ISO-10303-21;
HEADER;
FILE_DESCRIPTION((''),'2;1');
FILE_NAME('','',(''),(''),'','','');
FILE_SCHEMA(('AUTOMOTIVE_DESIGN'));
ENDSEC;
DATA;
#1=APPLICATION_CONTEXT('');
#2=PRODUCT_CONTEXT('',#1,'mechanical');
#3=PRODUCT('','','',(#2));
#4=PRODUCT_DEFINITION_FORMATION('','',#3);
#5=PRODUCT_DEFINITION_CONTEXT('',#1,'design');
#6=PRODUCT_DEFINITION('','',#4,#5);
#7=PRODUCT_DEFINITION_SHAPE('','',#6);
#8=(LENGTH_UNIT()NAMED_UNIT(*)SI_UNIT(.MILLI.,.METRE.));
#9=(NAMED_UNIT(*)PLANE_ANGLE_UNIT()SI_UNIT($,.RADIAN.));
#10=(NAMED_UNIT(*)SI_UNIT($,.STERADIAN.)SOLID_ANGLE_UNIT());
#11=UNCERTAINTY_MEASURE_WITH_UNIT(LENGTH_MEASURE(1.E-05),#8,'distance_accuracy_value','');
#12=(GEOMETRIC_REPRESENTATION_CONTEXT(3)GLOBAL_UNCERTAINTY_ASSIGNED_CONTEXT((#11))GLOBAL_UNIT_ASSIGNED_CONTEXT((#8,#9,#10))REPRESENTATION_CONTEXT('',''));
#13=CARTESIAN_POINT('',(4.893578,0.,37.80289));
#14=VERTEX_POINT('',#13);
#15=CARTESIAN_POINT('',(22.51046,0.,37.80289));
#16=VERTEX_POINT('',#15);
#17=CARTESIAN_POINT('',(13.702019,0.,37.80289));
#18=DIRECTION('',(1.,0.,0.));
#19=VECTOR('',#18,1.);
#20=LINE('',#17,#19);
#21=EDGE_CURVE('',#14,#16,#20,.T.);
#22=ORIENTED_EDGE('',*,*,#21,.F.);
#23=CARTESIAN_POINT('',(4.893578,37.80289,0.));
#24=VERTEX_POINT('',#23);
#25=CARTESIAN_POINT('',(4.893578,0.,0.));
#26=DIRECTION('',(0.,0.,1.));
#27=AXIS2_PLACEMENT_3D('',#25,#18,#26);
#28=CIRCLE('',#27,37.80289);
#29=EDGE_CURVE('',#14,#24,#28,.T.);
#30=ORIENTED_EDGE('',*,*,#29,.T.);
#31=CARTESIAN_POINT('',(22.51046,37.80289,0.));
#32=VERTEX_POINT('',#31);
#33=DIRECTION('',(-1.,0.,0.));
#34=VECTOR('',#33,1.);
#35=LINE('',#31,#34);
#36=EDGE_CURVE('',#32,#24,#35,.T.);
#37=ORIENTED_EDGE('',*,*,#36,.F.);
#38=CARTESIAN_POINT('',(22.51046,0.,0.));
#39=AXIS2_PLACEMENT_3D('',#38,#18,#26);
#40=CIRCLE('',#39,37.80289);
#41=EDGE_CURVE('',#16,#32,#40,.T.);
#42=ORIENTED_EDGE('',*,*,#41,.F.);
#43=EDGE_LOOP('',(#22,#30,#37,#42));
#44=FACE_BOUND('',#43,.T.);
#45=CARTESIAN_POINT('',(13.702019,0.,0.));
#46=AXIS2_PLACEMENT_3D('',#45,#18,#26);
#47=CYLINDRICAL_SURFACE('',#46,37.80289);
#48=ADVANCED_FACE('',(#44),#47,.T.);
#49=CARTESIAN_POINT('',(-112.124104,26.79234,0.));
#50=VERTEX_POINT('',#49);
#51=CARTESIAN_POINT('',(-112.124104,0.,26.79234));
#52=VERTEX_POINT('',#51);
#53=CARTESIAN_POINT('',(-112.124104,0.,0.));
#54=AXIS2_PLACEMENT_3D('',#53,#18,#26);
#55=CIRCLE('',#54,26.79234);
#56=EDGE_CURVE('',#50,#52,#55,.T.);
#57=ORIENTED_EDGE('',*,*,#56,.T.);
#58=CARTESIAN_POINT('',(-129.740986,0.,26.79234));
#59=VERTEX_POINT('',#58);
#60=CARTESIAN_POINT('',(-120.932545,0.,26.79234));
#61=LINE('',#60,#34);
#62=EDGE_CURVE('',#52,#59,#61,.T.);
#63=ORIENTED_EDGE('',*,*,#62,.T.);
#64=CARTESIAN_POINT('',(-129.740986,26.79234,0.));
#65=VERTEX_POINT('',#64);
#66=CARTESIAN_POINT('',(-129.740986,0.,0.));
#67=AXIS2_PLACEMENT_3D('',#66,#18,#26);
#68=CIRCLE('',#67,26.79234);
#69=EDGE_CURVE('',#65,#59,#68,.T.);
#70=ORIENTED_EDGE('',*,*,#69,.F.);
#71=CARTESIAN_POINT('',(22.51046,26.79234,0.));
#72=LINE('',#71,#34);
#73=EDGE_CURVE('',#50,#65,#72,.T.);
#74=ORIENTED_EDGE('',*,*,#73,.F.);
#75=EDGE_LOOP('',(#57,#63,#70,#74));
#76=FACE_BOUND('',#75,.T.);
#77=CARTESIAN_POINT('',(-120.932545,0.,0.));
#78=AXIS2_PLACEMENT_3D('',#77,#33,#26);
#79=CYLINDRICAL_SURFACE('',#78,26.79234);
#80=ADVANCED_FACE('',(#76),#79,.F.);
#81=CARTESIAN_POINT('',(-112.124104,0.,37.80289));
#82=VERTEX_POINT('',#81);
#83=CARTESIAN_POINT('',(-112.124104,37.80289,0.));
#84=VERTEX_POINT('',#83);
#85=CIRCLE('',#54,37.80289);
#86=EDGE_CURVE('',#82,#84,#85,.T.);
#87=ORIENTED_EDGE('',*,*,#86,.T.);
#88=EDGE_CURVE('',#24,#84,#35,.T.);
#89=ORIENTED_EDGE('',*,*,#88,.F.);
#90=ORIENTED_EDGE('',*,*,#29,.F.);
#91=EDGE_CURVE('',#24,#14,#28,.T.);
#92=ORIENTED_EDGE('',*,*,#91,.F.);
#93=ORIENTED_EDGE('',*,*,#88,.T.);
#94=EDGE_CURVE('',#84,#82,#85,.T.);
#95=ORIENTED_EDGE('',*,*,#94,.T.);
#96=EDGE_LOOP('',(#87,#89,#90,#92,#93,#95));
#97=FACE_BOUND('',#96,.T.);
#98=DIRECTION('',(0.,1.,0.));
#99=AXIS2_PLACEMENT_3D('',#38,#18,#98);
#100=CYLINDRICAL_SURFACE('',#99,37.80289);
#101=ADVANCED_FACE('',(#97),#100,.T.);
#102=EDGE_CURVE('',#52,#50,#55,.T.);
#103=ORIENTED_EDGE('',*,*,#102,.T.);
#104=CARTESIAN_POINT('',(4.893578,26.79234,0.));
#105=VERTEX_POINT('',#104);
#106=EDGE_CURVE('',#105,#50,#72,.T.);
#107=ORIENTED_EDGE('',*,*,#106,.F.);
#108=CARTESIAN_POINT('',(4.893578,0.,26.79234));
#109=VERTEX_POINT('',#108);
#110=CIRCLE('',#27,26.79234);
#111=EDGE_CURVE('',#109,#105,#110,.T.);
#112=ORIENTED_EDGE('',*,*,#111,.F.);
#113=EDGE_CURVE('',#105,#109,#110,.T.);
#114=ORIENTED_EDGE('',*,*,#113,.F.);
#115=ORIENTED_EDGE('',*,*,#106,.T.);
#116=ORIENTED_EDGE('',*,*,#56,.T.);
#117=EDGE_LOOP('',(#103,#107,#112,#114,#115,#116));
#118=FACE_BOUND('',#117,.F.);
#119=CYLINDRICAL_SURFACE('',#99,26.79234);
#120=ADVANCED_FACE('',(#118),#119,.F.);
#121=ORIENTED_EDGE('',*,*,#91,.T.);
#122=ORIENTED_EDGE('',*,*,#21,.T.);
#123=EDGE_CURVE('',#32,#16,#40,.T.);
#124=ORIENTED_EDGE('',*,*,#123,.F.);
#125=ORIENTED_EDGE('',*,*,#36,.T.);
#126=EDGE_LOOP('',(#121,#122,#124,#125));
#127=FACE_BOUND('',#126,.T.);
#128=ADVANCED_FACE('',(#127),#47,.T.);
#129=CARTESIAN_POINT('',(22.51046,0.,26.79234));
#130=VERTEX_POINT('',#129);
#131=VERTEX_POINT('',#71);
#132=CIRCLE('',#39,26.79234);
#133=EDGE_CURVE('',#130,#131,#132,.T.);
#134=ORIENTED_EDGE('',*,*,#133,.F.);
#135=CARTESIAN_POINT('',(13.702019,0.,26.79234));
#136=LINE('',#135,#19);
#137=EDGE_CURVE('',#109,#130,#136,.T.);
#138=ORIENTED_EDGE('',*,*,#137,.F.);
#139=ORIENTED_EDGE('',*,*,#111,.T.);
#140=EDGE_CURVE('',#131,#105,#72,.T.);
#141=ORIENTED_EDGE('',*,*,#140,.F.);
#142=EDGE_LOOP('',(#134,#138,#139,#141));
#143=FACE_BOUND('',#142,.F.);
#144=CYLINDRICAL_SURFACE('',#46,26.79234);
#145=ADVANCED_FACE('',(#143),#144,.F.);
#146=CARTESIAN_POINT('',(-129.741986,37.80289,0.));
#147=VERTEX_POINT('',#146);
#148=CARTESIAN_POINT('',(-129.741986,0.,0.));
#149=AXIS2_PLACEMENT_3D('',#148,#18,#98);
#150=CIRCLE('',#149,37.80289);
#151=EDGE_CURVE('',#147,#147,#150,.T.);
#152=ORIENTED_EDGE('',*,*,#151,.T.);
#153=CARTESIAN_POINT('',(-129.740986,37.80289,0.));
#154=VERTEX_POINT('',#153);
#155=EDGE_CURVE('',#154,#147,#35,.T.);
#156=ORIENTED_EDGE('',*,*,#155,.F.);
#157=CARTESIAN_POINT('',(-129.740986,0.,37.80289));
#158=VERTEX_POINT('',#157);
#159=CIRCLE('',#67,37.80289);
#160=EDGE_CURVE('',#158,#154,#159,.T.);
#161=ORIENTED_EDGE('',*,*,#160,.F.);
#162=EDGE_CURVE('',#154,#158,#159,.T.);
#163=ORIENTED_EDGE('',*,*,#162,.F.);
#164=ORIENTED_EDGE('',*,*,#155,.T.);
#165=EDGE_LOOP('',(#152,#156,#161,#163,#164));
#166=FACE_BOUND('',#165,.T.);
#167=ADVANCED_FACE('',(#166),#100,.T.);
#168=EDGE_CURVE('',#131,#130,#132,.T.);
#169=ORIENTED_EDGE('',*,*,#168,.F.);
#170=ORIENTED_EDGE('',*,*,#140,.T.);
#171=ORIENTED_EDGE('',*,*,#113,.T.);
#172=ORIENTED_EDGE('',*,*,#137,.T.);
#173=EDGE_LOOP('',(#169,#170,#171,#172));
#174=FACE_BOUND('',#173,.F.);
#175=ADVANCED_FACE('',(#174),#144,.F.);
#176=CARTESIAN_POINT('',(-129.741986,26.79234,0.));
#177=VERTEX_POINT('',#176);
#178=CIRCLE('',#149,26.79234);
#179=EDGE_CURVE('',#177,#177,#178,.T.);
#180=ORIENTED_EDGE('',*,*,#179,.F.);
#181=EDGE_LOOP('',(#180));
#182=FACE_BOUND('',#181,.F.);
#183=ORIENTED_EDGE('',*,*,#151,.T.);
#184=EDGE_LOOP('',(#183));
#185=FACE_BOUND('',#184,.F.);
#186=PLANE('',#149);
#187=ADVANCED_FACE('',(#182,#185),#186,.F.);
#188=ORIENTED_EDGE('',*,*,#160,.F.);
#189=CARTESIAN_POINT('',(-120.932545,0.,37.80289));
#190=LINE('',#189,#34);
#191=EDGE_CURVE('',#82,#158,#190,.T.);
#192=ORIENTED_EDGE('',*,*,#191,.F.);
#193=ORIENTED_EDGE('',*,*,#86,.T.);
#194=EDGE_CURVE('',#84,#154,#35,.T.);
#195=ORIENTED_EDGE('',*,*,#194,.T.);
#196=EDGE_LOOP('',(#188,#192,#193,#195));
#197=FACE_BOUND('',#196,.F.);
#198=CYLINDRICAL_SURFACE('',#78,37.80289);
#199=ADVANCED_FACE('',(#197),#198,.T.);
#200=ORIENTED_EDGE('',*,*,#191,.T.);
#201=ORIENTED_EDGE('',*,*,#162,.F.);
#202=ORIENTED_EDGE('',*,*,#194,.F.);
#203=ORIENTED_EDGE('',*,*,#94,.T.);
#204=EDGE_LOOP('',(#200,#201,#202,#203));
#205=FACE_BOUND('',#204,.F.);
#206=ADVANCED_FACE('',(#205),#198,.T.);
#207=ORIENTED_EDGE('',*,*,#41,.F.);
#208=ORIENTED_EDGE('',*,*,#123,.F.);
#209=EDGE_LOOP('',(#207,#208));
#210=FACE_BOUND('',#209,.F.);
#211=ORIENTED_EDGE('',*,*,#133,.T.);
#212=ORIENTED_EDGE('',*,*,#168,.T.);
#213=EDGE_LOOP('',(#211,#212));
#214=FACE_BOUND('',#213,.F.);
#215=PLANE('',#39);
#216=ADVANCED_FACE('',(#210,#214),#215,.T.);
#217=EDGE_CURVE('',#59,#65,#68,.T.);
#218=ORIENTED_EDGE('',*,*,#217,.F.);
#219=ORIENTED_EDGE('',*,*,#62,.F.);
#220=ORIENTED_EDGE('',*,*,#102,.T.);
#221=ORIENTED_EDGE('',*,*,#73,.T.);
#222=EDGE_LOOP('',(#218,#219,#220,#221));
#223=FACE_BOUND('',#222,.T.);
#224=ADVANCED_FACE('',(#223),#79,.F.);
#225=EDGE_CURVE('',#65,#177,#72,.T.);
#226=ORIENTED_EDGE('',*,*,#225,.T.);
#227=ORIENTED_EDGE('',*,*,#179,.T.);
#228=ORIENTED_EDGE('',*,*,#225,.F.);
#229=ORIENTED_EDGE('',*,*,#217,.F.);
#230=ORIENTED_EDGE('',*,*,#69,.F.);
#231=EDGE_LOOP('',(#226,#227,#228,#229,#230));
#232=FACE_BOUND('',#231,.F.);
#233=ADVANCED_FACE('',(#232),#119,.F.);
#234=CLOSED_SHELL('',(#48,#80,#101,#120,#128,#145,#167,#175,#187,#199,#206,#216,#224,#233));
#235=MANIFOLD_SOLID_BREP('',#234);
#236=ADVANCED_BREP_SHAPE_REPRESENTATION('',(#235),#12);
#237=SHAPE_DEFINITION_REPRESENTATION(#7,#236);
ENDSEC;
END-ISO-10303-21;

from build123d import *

# Parameters (mm, degrees)
F1_W     = 17.6168819889
F1_H     = 11.0105499625
F5_R     = 37.8028899431
F5_R_2   = 26.7923399806
F6_DEPTH = 152.2524452932


# Not quite as in the source:
# - a pattern or mirror of a feature is missing from the dataset's text; its kind, count and spacing are read off the source's solid
# - the program builds the solid bodies; features that only make, move or delete a surface that nothing else refers to are left out


with BuildPart() as f2:
    # F1 (on Front) → F2 (revolve)
    with BuildSketch(Plane.XZ):
        with Locations((13.7020186521, 32.2976149619)):
            Rectangle(F1_W, F1_H)
    revolve(axis=Axis((44.2868806422, 0, 0), (1, 0, 0)))


with BuildPart() as f2_copies_1:
    # F2_copies: instance of F2
    add(f2.part.mirror(Plane(origin=(-53.615263, 0, 0), x_dir=(0, 0, -1), z_dir=(-1, 0, 0))))


with BuildPart() as f2_1:
    add(f2.part)

    add(f2_copies_1.part)  # F6 merges F2_copies_1
    # F5 (on face) → F6 (join, through all)
    with BuildSketch(Plane.YZ.offset(22.5104596466)):
        Circle(F5_R)
        Circle(F5_R_2, mode=Mode.SUBTRACT)
    extrude(amount=-F6_DEPTH)


solid = f2_1.part
